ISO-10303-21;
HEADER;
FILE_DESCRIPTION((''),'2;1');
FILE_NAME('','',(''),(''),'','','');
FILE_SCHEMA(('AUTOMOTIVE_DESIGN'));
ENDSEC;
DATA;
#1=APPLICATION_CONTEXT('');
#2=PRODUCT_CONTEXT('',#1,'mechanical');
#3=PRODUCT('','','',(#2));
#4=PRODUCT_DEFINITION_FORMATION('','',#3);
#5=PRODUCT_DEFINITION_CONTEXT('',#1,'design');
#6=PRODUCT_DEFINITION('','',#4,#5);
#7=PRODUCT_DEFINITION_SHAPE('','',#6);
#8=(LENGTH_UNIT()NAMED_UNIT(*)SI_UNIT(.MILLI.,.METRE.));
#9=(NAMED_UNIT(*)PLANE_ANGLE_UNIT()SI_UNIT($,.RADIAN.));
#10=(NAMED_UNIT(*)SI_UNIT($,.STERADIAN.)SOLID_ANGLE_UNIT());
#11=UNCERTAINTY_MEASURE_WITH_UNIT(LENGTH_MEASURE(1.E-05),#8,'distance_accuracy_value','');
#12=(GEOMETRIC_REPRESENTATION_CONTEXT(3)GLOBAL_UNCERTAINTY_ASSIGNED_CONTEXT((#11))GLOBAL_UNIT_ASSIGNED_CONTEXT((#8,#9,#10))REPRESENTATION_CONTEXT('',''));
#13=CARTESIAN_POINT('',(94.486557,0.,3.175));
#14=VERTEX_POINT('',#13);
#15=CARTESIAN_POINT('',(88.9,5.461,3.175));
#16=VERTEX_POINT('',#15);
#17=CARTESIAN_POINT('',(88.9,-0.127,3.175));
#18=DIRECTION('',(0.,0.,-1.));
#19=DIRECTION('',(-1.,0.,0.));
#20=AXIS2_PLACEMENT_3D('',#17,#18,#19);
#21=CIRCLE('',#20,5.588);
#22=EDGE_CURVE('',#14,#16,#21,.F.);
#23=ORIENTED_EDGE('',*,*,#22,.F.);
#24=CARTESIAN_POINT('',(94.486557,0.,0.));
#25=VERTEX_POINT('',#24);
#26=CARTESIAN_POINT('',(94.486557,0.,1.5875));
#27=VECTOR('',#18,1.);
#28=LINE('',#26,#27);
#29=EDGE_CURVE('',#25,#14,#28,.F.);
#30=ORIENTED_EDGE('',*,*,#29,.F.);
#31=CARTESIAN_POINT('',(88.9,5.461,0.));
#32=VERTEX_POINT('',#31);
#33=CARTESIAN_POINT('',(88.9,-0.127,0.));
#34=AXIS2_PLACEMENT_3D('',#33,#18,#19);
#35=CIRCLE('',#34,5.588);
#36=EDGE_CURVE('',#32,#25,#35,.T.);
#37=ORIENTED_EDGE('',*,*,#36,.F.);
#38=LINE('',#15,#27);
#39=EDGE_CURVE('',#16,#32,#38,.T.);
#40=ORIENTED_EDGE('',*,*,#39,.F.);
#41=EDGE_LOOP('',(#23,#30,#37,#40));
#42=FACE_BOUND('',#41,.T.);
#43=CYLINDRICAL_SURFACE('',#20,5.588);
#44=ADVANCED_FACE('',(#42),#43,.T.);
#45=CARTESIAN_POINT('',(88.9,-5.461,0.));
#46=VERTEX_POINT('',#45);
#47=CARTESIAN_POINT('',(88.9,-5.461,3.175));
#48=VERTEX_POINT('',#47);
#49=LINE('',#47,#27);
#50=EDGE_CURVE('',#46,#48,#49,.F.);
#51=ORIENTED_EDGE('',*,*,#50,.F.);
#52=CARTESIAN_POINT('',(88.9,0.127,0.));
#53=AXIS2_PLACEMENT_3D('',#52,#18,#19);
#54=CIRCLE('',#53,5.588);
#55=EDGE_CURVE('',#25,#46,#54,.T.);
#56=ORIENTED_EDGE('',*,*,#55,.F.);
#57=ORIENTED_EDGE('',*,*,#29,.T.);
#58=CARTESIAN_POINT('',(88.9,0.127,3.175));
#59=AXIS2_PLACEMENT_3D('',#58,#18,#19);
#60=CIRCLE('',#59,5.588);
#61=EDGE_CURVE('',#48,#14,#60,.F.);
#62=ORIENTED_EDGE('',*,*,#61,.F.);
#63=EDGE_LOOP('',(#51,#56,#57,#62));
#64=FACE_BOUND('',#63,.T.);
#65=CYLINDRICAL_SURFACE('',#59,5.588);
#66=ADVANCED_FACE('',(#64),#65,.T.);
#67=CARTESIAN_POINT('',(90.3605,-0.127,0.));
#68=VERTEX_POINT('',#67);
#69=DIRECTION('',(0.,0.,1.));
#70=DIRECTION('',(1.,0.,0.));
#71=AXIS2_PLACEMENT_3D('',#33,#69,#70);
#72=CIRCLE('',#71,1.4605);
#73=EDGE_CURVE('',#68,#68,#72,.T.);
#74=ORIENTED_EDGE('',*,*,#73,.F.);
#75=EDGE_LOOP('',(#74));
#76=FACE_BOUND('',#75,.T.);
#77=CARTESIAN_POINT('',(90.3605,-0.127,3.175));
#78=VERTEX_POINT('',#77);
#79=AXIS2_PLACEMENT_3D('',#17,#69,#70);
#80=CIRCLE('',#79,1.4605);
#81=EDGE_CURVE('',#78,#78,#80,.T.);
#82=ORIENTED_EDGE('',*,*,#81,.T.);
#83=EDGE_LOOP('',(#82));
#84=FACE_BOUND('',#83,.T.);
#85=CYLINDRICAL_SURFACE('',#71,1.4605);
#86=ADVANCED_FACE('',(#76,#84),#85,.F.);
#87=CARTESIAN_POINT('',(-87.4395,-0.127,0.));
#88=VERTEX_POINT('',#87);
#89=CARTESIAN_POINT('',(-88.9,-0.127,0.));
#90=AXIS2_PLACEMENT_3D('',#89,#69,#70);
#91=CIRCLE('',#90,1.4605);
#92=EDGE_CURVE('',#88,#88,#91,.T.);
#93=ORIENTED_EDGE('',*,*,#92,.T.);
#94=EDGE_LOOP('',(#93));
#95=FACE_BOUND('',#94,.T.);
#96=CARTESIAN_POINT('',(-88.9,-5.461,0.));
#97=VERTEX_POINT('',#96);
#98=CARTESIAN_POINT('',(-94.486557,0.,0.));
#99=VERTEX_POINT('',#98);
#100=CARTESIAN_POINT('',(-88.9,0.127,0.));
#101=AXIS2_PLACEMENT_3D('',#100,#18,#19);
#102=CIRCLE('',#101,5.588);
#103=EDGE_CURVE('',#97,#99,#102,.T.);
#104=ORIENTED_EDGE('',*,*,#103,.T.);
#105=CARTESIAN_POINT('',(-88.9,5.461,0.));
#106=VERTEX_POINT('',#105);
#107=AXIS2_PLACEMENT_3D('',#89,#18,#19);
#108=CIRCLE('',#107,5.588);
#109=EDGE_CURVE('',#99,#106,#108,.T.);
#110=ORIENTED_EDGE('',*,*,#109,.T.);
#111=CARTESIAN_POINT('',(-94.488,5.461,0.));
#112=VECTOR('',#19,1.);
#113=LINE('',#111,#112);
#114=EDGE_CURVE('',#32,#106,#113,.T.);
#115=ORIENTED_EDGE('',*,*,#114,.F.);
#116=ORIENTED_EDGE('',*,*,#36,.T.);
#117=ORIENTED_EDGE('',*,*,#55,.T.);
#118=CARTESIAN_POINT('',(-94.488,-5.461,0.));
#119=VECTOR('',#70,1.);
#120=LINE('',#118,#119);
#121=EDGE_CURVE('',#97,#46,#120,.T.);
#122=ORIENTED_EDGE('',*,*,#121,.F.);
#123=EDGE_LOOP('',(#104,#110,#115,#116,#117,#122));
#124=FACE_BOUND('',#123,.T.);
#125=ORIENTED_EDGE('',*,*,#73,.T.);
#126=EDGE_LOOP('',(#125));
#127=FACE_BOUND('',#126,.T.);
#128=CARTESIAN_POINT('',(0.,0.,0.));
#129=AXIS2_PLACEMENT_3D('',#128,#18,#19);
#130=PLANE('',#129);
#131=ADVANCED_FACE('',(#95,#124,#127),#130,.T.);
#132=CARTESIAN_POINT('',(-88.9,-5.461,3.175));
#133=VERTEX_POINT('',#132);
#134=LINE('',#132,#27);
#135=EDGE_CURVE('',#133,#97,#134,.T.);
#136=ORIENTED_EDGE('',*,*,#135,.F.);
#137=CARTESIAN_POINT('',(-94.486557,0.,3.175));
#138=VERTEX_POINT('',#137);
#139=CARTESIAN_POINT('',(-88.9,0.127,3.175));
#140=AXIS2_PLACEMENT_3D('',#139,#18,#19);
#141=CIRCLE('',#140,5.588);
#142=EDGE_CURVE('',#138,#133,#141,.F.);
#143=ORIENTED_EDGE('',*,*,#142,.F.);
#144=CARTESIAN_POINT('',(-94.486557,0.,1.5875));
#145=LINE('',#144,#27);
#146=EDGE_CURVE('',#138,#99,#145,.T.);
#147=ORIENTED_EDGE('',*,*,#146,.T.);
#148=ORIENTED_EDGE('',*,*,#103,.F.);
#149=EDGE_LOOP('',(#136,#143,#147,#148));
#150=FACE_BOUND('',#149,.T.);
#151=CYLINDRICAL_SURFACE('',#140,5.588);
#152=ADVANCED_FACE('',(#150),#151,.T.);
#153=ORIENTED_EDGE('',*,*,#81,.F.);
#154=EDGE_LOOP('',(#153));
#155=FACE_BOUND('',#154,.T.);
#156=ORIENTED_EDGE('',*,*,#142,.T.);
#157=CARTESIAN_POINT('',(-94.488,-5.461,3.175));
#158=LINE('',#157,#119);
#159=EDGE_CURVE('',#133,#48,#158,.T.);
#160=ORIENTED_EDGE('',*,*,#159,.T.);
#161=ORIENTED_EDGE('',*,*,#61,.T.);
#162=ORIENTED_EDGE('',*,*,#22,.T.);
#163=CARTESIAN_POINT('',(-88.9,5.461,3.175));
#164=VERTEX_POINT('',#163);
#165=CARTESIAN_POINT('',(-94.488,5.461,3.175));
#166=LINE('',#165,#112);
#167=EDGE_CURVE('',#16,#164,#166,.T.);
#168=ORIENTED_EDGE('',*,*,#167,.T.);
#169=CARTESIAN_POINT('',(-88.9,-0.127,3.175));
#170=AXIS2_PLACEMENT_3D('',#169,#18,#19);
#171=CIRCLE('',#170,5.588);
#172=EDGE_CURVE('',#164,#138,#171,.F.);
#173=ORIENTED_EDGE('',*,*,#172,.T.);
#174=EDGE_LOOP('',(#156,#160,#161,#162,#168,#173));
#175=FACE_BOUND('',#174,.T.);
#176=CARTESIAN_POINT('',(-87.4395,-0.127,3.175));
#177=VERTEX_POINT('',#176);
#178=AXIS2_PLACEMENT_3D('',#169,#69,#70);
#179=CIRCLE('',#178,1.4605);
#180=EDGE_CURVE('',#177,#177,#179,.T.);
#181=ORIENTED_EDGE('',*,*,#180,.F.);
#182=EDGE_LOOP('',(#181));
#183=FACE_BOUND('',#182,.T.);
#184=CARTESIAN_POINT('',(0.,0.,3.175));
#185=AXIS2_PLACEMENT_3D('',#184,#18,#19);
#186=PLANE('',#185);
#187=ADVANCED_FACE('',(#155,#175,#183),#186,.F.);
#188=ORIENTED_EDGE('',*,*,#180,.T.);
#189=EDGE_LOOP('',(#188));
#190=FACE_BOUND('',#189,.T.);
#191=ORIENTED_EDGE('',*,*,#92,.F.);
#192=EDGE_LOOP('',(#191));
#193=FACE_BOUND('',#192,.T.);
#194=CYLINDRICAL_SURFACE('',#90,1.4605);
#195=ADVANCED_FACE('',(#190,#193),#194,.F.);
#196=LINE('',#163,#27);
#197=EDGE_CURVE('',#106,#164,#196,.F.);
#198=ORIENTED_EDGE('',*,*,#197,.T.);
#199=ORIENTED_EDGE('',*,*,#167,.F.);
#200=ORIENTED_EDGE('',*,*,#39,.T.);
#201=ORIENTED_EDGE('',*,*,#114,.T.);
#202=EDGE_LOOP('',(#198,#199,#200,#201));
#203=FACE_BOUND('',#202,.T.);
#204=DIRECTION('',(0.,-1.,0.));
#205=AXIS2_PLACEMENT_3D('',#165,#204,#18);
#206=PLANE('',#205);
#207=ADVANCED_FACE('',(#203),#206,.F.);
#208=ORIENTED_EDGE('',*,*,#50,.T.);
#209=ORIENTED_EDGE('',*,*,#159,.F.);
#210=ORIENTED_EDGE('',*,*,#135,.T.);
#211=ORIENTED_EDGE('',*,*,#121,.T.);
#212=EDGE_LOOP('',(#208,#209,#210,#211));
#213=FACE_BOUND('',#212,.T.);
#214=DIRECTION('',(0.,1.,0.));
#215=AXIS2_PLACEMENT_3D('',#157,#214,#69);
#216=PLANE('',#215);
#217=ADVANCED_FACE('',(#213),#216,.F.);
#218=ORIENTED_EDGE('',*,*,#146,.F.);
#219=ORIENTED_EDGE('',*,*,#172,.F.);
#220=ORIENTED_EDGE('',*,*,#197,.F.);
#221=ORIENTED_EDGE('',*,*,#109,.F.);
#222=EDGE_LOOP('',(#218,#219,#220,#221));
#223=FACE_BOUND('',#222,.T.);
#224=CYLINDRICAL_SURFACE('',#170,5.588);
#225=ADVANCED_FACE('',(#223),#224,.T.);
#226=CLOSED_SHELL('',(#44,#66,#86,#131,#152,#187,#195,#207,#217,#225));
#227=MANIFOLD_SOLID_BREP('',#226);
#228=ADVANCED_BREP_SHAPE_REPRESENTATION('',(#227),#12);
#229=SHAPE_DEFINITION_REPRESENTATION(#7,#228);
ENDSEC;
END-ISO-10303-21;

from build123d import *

# Parameters (mm, degrees)
SKETCH1_W           = 188.976
SKETCH1_H           = 10.922
BOSS_EXTRUDE1_DEPTH = 3.175
FILLET1_R           = 5.588
SKETCH2_R           = 1.4605
CUT_EXTRUDE1_DEPTH  = 95.697479006


with BuildPart() as part:
    # Sketch1 → Boss-Extrude1 (new body)
    with BuildSketch(Plane.XY):
        Rectangle(SKETCH1_W, SKETCH1_H)
    extrude(amount=BOSS_EXTRUDE1_DEPTH)

    # Fillet1
    # the kernel refuses this fillet: 5.588 mm, written as the material it takes off along each edge
    with BuildSketch(Plane(origin=(-94.488, -5.461, -13.97), x_dir=(1, 0, 0), z_dir=(0, 0, 1))) as fillet1_piece_1:
        with BuildLine():
            CenterArc((FILLET1_R, FILLET1_R), FILLET1_R, 180, 90)
            Line((0, FILLET1_R), (0, 0))
            Line((0, 0), (FILLET1_R, 0))
        make_face()
    extrude(amount=31.115, mode=Mode.SUBTRACT)
    with BuildSketch(Plane(origin=(-94.488, 5.461, -13.97), x_dir=(1, 0, 0), z_dir=(0, 0, 1)), Plane(origin=(94.488, -5.461, -13.97), x_dir=(-1, 0, 0), z_dir=(0, 0, 1)), Plane(origin=(94.488, 5.461, -13.97), x_dir=(0, -1, 0), z_dir=(0, 0, 1))) as fillet1_piece_2:
        with BuildLine():
            CenterArc((FILLET1_R, -FILLET1_R), FILLET1_R, 90, 90)
            Line((0, -FILLET1_R), (0, 0))
            Line((0, 0), (FILLET1_R, 0))
        make_face()
    extrude(amount=31.115, mode=Mode.SUBTRACT)

    # Sketch2 → Cut-Extrude1 (cut, through all)
    with BuildSketch(Plane.XY.offset(3.175)):
        with Locations((-88.9, -0.127)):
            Circle(SKETCH2_R)
        with Locations((88.9, -0.127)):
            Circle(SKETCH2_R)
    extrude(amount=-CUT_EXTRUDE1_DEPTH, mode=Mode.SUBTRACT)


solid = part.part
